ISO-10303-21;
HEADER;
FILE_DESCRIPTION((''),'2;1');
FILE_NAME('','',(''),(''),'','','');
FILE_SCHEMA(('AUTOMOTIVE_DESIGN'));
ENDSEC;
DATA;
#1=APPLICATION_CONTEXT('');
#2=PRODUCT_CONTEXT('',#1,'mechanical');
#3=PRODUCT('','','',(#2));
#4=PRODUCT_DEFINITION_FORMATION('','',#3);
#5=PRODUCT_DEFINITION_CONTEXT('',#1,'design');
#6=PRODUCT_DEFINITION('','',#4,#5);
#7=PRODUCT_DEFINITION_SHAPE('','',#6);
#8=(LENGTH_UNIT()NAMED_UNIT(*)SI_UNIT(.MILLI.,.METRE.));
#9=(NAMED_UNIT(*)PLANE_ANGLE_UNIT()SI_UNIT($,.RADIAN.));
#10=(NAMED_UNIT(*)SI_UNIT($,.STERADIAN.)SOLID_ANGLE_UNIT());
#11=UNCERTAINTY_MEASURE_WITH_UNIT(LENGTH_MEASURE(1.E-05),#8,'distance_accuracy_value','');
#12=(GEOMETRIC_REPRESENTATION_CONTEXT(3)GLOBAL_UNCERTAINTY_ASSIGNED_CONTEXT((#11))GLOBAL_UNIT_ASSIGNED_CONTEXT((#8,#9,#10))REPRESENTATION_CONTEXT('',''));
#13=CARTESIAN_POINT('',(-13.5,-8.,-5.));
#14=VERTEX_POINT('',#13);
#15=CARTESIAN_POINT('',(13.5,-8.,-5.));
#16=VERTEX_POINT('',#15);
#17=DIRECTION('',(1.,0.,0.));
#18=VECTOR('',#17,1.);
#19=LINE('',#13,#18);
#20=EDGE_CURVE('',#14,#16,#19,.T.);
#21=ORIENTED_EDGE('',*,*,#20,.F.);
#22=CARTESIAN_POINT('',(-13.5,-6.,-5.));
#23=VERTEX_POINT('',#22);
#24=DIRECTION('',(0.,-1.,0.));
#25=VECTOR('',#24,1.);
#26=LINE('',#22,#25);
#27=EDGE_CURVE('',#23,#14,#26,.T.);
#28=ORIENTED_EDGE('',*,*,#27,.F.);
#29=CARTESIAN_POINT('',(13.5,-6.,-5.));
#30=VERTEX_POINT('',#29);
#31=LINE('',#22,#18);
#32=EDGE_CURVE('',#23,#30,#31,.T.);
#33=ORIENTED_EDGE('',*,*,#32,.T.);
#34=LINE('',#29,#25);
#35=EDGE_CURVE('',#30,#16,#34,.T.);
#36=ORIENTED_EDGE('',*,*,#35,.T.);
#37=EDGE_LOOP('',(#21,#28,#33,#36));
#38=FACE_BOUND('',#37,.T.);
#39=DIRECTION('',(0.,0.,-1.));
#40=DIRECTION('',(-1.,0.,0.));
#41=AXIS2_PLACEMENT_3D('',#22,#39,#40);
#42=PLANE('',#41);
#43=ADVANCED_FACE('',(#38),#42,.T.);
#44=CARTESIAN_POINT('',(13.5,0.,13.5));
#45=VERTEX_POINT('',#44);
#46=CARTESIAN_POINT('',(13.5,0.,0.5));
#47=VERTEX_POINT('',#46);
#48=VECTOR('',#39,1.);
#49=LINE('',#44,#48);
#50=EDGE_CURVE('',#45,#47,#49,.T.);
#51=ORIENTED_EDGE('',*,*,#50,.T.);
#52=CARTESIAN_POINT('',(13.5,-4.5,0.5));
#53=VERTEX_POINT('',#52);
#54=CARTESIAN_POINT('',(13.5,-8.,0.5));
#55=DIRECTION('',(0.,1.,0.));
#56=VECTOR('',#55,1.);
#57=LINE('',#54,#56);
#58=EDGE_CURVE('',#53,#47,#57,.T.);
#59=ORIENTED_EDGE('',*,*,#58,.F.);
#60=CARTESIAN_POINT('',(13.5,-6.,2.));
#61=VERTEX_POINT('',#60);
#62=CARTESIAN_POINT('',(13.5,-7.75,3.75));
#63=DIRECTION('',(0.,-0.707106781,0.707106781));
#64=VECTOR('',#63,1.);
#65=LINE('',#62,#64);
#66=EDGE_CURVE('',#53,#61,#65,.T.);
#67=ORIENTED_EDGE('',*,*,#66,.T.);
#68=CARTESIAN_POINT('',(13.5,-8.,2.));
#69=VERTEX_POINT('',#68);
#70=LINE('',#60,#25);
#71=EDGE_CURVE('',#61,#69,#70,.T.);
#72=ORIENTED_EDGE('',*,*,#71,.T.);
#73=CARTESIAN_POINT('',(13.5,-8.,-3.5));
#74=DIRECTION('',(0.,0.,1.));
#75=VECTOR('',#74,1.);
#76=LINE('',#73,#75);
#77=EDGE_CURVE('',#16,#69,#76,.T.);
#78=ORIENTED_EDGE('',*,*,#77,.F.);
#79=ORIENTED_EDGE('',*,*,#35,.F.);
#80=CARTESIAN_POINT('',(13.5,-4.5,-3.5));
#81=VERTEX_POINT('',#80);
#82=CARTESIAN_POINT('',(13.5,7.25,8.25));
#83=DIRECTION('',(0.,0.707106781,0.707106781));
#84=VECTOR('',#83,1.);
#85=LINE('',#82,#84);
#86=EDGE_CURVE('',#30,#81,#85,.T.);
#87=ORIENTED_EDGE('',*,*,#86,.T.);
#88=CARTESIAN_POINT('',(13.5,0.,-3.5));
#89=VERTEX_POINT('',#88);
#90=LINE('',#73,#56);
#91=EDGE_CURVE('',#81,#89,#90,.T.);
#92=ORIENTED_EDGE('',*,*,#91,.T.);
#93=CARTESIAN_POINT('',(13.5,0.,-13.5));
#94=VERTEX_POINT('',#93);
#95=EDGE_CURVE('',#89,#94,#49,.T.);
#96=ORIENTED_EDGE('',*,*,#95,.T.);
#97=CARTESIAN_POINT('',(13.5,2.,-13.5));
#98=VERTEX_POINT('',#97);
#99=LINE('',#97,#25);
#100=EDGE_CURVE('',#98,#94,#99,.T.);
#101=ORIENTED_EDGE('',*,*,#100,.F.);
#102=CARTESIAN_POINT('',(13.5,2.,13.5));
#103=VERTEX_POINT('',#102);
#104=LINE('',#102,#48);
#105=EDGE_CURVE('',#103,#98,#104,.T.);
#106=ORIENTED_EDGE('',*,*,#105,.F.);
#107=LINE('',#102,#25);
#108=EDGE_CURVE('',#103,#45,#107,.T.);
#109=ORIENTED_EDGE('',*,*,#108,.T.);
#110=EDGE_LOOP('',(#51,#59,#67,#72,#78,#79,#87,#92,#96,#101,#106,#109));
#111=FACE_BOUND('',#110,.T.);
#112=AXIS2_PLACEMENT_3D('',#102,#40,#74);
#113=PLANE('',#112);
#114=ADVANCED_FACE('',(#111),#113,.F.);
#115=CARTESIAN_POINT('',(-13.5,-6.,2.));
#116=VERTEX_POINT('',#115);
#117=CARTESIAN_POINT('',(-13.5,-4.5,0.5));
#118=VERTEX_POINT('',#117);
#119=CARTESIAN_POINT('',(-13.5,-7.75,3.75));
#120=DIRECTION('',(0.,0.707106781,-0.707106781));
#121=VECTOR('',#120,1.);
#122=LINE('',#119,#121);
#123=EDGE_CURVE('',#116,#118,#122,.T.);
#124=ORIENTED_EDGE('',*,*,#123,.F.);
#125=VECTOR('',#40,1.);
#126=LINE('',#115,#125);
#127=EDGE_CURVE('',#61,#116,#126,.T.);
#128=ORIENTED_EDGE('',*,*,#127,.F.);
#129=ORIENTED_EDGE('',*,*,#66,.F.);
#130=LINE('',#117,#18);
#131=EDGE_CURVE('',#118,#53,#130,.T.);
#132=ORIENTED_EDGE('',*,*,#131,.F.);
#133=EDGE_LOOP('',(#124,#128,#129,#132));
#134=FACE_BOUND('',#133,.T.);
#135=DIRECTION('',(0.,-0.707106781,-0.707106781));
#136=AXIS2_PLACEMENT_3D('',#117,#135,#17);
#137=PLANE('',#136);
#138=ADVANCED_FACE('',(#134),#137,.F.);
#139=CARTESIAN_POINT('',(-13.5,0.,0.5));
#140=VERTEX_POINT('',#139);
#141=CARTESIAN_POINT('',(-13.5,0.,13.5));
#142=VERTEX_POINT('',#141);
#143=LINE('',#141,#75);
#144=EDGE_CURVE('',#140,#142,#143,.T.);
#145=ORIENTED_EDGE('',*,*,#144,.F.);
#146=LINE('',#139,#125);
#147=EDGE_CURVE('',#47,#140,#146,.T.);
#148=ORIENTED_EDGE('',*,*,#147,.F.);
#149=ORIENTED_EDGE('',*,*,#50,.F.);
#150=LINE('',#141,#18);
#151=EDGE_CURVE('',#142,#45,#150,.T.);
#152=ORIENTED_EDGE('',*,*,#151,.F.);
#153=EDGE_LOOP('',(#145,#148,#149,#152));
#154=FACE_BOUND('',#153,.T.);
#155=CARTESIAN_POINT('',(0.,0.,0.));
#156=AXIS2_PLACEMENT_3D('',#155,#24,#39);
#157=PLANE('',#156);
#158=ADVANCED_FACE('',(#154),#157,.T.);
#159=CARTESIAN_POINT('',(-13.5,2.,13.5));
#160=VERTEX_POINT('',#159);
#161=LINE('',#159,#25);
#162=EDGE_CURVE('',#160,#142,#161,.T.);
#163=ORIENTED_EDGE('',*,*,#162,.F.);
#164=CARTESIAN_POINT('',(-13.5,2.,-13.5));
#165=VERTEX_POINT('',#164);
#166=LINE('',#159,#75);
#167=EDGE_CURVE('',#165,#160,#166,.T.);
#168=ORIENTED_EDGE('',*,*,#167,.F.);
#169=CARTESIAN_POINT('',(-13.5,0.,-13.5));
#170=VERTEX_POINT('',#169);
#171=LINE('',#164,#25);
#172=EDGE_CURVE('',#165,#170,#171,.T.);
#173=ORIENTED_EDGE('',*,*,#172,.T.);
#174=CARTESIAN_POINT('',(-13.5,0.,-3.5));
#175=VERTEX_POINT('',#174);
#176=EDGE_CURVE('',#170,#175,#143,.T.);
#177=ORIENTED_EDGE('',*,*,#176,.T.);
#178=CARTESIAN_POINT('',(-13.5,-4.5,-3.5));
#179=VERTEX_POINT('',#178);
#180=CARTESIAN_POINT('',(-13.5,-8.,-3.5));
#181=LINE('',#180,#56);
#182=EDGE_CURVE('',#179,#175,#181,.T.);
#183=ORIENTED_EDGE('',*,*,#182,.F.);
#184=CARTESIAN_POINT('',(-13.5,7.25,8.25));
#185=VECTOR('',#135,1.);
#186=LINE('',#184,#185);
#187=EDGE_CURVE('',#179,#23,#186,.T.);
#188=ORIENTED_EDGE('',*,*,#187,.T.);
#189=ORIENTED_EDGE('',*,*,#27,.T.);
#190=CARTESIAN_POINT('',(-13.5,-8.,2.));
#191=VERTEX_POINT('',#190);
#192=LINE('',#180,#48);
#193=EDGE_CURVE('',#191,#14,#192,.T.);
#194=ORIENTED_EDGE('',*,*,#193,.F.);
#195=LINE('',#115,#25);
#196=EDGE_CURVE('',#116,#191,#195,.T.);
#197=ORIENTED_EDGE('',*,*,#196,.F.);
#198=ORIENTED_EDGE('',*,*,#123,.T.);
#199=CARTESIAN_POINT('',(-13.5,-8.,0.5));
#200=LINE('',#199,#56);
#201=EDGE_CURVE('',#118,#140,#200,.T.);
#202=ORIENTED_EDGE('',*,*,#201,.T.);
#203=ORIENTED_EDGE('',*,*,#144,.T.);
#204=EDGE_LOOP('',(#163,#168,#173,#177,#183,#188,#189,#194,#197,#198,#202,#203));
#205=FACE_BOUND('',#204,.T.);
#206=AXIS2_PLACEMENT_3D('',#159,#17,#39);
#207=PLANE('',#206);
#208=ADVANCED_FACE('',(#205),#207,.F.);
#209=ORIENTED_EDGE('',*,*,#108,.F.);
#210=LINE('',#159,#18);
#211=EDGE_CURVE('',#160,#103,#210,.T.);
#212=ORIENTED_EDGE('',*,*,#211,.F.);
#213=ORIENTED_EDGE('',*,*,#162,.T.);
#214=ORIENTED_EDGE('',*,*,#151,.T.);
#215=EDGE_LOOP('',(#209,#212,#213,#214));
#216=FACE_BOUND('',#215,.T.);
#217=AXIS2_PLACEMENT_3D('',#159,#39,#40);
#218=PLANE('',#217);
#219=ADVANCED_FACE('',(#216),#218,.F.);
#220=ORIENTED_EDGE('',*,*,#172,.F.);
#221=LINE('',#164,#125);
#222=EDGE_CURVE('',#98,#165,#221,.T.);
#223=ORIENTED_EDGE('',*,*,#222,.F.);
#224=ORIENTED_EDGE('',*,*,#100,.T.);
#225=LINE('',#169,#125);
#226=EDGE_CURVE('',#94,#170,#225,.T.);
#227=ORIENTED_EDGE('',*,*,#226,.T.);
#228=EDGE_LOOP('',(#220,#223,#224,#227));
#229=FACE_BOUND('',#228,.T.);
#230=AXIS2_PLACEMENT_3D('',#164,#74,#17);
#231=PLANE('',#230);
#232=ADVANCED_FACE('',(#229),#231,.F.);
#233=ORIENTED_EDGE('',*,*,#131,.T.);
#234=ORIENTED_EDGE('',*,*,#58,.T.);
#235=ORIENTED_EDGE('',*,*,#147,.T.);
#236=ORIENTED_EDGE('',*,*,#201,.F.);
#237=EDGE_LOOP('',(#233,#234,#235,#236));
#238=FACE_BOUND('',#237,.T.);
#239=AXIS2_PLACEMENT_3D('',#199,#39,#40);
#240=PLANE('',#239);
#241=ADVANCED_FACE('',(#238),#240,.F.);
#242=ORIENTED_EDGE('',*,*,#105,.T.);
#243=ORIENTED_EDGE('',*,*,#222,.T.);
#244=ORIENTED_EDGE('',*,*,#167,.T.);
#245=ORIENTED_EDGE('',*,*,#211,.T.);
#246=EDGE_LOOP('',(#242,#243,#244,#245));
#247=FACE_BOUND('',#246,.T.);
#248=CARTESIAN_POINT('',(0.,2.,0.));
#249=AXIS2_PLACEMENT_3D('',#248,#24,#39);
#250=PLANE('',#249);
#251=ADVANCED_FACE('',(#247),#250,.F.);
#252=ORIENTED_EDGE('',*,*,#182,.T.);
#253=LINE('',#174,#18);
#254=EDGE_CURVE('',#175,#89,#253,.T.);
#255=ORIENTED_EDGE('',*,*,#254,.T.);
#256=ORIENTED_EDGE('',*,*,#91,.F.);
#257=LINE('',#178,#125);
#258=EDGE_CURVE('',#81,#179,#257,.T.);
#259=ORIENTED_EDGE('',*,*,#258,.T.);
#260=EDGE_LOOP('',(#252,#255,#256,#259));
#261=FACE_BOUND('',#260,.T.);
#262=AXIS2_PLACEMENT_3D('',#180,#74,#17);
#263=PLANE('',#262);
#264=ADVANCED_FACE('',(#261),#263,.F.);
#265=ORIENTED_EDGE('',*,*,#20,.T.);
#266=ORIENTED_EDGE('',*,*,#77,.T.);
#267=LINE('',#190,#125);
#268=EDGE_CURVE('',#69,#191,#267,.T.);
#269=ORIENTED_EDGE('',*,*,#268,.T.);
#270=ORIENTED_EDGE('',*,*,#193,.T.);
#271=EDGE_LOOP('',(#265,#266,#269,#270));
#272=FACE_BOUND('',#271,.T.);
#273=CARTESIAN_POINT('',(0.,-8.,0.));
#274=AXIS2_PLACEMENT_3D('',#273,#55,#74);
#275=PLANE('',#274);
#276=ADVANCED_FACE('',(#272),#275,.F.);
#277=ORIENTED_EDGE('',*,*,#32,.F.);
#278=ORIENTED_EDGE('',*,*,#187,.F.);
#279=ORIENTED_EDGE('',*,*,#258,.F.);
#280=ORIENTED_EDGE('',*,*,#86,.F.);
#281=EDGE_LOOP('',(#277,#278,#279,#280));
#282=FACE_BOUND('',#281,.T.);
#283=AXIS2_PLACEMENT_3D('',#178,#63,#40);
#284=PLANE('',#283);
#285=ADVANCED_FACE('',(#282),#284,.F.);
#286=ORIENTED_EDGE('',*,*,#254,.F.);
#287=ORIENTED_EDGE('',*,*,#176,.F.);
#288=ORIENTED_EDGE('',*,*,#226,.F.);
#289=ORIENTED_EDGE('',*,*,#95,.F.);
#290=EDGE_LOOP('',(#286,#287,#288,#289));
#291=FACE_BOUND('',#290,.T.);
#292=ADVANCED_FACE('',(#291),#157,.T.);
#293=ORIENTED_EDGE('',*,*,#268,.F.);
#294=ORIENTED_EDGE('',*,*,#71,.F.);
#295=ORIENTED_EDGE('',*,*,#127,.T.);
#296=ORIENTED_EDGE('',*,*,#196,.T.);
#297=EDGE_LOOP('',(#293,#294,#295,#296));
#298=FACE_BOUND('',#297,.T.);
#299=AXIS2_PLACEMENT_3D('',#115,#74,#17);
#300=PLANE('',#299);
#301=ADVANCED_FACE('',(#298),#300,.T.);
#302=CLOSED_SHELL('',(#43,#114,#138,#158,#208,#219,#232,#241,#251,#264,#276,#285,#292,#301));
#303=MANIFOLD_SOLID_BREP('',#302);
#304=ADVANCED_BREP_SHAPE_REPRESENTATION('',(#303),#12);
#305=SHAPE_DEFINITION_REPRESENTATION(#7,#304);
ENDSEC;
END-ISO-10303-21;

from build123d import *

# Parameters (mm, degrees)
SKETCH1_W           = 27
SKETCH1_H           = 27
BOSS_EXTRUDE1_DEPTH = 2
SKETCH2_W           = 27
SKETCH2_H           = 4
BOSS_EXTRUDE2_DEPTH = 8
SKETCH3_W           = 27
SKETCH3_H           = 7
BOSS_EXTRUDE3_DEPTH = 2
CHAMFER1_SIZE       = 1.5


with BuildPart() as part:
    # Sketch1 → Boss-Extrude1 (new body)
    with BuildSketch(Plane(origin=(0, 0, 0), x_dir=(1, 0, 0), z_dir=(0, 1, 0))):
        Rectangle(SKETCH1_W, SKETCH1_H)
    extrude(amount=BOSS_EXTRUDE1_DEPTH)

    # Sketch2 → Boss-Extrude2 (add)
    with BuildSketch(Plane.XZ):
        with Locations((0, -1.5)):
            Rectangle(SKETCH2_W, SKETCH2_H)
    extrude(amount=BOSS_EXTRUDE2_DEPTH)

    # Sketch3 → Boss-Extrude3 (add)
    with BuildSketch(Plane.XZ.offset(8)):
        with Locations((0, -1.5)):
            Rectangle(SKETCH3_W, SKETCH3_H)
    extrude(amount=-BOSS_EXTRUDE3_DEPTH)

    # Chamfer1
    chamfer1_edges = [part.edges().sort_by_distance(p)[0] for p in [
        (0, -6, -3.5),
        (0, -6, 0.5),
    ]]
    chamfer(chamfer1_edges, length=CHAMFER1_SIZE - 0.0001)  # a hair under: the kernel refuses the full size


solid = part.part
